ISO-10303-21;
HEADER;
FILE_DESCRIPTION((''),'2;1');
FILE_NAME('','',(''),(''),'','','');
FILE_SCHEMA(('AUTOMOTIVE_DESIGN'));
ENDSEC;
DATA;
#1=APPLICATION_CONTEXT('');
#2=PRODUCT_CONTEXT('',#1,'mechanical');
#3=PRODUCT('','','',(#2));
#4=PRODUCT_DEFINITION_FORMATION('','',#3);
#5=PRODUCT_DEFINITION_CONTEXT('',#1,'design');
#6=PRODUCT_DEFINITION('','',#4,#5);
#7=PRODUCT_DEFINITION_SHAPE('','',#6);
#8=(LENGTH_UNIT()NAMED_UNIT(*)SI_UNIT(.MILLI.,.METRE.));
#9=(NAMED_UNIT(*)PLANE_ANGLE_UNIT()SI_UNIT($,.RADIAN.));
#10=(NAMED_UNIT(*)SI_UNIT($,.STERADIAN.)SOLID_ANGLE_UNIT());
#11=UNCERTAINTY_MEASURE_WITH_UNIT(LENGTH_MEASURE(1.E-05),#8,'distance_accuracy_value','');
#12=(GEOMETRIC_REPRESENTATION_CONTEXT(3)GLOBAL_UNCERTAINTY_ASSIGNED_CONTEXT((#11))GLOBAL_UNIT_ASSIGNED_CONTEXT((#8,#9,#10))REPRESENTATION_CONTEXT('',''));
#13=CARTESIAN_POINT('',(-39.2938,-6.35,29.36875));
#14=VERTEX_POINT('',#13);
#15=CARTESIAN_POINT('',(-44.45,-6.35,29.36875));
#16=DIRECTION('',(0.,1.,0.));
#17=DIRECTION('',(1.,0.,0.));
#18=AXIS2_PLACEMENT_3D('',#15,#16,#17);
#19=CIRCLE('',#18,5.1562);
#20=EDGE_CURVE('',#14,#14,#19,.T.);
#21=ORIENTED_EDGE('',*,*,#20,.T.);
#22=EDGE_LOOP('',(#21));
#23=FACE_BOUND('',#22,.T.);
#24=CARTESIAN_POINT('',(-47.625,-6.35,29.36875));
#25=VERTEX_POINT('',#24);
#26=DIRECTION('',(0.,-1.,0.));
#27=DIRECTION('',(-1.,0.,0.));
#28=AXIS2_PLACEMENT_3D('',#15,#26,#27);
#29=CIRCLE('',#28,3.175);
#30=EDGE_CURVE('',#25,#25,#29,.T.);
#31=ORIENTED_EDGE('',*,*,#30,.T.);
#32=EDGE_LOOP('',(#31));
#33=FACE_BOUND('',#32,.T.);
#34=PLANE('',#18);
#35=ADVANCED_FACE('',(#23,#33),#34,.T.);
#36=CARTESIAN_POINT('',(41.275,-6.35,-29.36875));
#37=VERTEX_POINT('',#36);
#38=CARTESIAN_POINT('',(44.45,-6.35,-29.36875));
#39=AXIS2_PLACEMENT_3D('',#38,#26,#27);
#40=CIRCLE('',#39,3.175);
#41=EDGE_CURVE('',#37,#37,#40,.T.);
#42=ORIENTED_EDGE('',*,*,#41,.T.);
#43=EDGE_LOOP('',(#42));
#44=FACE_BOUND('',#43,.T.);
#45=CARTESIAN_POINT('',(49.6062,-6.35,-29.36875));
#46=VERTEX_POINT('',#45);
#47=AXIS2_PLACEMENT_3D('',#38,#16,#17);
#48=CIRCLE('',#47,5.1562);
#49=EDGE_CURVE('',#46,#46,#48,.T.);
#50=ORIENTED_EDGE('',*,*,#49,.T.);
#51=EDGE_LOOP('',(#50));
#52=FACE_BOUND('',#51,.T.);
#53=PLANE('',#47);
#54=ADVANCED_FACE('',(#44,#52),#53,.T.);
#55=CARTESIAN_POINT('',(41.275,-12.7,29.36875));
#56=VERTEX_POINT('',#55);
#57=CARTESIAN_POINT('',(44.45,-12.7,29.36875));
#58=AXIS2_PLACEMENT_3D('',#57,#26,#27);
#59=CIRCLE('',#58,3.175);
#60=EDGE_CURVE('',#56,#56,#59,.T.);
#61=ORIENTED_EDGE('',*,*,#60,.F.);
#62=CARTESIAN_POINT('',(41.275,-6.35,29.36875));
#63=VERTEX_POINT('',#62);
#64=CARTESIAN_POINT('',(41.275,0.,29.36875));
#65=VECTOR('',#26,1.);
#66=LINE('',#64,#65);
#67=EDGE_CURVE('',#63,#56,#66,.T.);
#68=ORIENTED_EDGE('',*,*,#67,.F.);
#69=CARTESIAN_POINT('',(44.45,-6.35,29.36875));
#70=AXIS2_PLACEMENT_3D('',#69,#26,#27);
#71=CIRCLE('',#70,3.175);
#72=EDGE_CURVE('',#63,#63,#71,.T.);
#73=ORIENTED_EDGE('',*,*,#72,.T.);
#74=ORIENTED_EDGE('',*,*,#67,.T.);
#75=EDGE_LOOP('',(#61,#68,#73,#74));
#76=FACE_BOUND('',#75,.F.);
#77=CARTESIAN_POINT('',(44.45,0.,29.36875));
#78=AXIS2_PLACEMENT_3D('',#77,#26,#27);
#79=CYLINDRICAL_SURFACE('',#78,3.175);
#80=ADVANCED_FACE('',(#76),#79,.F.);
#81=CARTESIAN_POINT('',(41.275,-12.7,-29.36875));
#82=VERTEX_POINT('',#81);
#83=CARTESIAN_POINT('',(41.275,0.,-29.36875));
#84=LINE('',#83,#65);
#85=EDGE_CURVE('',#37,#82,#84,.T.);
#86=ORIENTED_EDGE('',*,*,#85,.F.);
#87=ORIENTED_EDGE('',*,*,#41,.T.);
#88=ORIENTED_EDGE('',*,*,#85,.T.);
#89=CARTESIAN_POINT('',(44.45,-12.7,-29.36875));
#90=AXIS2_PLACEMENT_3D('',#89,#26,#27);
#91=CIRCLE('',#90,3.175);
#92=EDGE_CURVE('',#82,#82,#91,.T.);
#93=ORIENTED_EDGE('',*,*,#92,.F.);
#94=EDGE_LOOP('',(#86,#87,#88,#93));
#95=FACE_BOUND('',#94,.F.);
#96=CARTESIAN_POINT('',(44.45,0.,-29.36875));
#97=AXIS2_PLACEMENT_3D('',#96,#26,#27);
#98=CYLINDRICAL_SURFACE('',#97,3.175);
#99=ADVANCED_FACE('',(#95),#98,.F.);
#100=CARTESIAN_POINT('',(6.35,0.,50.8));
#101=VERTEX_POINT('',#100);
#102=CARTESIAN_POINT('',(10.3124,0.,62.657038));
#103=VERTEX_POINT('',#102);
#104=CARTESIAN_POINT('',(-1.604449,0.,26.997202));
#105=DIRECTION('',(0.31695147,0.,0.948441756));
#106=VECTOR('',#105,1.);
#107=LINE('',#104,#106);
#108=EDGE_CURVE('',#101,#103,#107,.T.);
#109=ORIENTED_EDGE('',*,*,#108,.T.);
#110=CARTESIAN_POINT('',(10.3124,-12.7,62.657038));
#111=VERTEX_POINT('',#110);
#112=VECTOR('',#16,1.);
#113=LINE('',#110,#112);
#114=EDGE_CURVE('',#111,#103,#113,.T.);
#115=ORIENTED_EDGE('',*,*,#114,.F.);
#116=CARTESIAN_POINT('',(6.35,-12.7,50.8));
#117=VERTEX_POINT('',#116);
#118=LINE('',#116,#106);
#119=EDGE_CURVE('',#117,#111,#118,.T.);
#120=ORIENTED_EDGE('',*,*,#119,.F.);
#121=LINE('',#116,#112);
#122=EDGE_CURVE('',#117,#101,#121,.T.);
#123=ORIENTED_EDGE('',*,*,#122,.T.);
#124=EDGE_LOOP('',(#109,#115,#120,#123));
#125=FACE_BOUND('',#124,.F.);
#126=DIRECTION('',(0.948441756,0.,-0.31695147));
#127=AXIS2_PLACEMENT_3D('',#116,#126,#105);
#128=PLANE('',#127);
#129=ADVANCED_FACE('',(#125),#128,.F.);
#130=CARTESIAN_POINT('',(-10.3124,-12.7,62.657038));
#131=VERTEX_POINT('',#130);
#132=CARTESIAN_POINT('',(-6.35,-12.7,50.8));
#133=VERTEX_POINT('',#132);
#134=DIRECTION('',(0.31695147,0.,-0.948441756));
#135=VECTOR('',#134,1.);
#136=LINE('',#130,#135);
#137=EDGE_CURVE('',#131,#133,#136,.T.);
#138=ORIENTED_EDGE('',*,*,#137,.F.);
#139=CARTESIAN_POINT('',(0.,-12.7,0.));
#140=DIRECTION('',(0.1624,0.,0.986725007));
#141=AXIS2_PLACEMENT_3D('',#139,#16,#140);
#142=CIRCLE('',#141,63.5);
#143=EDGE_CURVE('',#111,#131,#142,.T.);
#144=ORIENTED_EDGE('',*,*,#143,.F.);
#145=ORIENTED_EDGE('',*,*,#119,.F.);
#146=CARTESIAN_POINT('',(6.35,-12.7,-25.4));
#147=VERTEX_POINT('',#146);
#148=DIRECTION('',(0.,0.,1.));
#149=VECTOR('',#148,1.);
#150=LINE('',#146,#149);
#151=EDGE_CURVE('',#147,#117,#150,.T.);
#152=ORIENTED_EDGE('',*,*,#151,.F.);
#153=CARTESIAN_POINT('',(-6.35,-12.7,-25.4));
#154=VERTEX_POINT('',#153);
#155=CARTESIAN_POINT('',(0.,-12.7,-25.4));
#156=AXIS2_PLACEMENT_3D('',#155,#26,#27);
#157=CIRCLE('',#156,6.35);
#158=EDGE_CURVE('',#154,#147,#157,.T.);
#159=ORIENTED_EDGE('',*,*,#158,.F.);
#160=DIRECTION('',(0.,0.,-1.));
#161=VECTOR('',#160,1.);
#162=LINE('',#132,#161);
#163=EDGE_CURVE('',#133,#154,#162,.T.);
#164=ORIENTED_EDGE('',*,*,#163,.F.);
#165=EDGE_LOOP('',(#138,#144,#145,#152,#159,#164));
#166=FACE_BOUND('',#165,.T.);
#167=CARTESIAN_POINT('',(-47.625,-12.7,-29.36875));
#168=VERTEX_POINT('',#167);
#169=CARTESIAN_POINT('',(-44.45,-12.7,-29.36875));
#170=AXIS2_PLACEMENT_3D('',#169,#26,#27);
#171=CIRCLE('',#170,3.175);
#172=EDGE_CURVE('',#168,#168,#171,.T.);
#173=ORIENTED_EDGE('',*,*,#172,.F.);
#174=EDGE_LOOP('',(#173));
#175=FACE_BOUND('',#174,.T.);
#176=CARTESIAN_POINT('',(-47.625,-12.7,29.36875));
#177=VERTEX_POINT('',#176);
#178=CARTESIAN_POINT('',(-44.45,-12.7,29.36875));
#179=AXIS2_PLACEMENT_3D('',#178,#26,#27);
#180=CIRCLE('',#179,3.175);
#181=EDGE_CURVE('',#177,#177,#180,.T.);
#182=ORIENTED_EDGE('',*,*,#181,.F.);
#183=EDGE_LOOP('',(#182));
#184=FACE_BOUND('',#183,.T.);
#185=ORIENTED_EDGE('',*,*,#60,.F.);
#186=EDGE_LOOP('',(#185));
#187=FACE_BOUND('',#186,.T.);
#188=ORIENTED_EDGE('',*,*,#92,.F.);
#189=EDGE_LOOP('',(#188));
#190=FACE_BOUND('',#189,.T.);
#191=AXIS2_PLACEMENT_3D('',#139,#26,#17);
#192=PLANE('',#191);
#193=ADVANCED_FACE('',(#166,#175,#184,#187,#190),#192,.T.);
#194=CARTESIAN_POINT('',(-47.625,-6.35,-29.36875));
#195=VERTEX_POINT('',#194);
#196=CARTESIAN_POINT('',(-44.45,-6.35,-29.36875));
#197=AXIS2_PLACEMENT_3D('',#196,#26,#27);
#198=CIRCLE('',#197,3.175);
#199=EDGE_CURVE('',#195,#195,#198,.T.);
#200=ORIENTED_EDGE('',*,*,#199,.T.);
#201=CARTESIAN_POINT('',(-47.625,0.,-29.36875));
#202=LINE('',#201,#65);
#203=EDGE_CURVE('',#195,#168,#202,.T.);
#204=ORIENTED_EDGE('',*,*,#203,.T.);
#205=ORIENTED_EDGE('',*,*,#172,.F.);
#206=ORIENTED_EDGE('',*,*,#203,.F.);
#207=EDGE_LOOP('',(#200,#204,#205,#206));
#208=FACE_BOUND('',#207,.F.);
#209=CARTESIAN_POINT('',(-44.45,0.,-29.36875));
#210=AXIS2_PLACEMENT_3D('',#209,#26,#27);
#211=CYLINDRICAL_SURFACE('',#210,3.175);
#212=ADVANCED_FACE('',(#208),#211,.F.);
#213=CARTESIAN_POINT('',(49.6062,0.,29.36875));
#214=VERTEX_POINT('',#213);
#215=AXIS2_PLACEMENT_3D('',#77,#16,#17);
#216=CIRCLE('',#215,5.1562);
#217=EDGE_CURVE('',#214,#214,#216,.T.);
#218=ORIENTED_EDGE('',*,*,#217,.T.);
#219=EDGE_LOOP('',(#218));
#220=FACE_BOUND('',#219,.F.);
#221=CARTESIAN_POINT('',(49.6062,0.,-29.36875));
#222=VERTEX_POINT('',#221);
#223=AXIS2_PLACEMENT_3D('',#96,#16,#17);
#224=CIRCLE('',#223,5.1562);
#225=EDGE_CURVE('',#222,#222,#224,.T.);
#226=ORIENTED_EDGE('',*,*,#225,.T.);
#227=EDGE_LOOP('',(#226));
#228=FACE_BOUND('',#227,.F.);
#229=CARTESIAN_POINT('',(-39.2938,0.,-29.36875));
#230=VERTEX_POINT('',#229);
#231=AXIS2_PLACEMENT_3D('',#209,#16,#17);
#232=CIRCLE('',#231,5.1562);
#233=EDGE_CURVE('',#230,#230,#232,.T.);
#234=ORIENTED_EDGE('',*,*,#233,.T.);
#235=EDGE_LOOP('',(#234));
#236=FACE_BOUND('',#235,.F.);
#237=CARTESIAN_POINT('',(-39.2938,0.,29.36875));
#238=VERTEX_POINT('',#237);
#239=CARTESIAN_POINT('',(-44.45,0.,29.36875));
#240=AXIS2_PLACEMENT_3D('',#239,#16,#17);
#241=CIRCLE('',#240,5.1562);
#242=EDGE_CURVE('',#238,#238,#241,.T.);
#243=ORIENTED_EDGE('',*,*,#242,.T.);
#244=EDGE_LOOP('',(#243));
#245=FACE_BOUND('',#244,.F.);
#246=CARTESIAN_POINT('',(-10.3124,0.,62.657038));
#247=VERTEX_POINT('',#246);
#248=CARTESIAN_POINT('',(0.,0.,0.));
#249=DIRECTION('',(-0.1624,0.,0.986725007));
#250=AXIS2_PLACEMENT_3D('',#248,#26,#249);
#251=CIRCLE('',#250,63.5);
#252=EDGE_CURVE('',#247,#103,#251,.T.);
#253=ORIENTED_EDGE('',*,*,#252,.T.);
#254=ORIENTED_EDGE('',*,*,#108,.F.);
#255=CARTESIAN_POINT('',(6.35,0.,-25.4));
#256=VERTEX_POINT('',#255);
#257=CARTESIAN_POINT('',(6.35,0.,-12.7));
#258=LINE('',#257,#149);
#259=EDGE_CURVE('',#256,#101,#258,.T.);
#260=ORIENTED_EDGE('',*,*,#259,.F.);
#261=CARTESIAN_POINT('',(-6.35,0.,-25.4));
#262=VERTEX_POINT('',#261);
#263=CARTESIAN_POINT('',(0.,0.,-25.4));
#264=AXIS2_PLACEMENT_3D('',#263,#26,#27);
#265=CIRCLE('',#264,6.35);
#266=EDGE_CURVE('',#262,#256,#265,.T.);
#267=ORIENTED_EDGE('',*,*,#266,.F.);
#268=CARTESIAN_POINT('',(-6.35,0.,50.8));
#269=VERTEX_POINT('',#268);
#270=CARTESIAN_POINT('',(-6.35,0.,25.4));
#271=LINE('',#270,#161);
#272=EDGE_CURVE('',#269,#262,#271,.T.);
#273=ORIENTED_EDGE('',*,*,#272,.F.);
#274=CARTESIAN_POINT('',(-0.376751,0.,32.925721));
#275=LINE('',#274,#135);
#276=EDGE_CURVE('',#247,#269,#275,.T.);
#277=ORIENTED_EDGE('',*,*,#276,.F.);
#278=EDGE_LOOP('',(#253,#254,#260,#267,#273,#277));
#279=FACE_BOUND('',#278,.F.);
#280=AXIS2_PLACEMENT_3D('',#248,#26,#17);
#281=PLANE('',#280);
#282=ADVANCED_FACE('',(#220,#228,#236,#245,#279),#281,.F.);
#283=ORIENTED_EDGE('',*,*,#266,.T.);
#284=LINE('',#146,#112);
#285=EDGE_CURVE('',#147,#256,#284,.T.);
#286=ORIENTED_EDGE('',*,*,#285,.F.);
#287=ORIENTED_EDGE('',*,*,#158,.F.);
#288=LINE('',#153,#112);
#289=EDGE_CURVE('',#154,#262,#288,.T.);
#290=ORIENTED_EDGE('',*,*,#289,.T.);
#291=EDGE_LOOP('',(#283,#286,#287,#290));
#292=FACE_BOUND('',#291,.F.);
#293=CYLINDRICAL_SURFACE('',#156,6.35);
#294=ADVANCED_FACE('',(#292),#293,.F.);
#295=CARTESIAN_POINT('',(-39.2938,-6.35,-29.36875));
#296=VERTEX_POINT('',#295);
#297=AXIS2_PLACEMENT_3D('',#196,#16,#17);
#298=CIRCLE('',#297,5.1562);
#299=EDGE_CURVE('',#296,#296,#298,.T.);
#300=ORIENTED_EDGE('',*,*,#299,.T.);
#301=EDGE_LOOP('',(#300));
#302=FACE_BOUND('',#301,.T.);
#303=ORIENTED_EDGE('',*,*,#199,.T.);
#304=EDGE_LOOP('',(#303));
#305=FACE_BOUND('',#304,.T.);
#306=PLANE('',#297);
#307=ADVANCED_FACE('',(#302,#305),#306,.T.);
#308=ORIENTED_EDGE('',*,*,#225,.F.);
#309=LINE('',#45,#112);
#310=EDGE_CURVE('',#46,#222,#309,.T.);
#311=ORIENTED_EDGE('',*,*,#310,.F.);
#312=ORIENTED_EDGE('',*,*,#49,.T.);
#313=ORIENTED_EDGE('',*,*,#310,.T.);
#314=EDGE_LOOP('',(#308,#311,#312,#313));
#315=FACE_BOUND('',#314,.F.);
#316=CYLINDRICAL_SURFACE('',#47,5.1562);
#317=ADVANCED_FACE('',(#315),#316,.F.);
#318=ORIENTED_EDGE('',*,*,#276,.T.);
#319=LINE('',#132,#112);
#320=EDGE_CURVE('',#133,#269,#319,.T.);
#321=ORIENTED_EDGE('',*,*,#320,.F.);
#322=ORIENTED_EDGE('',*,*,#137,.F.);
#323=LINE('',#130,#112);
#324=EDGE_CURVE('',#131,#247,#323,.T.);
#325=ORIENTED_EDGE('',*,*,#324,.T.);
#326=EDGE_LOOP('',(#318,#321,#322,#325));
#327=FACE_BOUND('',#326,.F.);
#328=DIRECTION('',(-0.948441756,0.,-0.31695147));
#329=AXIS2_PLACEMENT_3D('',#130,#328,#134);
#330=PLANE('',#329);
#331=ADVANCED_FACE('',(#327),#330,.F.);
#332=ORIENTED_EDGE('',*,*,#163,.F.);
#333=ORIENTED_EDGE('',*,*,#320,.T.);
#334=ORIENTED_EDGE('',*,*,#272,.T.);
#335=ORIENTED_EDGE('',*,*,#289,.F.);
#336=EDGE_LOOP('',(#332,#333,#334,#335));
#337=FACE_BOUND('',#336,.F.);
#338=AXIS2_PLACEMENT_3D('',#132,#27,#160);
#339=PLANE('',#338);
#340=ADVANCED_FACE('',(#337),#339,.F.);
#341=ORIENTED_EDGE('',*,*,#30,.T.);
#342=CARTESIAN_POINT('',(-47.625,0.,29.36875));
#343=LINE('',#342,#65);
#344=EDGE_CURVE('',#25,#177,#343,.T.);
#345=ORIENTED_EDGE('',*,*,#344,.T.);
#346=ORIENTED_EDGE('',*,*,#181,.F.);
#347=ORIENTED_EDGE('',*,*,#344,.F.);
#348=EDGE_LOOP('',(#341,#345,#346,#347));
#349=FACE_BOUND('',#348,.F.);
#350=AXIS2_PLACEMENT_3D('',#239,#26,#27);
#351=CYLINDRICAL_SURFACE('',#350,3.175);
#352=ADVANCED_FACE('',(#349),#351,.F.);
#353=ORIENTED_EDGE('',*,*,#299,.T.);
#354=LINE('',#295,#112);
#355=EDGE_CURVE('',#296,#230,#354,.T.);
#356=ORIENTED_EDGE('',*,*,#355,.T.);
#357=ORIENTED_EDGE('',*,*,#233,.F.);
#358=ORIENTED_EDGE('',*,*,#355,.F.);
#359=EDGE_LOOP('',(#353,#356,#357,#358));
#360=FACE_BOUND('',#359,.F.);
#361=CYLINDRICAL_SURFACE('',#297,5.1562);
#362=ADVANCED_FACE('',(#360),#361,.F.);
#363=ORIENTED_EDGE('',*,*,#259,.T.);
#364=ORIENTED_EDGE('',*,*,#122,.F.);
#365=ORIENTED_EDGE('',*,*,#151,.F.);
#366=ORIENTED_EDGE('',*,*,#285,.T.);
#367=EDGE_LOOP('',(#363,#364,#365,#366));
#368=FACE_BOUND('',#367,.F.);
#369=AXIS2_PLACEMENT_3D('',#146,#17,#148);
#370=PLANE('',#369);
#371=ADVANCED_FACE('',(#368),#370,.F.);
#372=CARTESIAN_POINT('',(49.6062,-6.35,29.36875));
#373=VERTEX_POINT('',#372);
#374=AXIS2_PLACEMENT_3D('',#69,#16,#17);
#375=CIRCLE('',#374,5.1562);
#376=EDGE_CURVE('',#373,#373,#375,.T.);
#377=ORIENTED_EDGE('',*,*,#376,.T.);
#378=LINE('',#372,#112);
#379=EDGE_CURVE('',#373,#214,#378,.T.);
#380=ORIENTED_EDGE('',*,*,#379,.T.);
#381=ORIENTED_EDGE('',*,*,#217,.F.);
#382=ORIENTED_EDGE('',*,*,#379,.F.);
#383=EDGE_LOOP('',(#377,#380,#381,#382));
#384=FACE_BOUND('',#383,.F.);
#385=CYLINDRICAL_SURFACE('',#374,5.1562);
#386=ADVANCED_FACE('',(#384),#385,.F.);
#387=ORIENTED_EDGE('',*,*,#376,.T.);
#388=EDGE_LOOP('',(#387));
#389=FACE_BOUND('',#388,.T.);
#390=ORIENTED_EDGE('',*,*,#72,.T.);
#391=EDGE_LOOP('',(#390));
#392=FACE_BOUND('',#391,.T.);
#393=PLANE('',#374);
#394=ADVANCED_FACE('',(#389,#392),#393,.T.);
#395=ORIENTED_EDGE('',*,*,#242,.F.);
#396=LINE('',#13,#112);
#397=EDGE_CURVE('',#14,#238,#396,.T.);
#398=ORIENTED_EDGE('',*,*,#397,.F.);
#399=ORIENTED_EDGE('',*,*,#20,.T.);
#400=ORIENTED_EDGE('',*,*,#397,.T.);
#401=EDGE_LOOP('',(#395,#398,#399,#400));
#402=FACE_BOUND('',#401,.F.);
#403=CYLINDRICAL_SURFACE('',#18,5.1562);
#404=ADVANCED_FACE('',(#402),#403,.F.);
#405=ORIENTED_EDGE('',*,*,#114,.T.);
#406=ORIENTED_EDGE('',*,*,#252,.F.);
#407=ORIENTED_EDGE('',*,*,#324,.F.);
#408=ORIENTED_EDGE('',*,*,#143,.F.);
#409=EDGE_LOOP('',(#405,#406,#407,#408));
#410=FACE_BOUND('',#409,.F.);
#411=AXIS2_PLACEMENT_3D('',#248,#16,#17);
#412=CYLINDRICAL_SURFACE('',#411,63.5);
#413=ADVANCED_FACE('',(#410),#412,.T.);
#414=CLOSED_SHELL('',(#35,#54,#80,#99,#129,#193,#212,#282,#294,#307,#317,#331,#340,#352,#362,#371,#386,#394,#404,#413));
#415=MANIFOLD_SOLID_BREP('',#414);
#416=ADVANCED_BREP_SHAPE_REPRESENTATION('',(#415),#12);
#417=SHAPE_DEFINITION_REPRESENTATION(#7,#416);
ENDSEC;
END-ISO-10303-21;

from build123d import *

# Parameters (mm, degrees)
F0_R           = 63.5
F1_DEPTH       = 12.7
F3_DEPTH       = 25.4
F4_D           = 6.35
F4_CBORE_D     = 10.3124
F4_CBORE_DEPTH = 6.35


# Not quite as in the source:
# - a feature names something its author has since deleted; it is built from what else it names


with BuildPart() as f1:
    # F0 (on Front) → F1 (new body)
    with BuildSketch(Plane.XZ):
        Circle(F0_R)
    extrude(amount=F1_DEPTH)

    # F2 (on face) → F3 (cut)
    with BuildSketch(Plane.XZ.offset(12.7)):
        with BuildLine():
            Line((-10.3124, 62.6570379625), (-6.35, 50.8))
            Line((-6.35, 50.8), (-6.35, -25.4))
            ThreePointArc((-6.35, -25.4), (0, -31.75), (6.35, -25.4))
            Line((6.35, -25.4), (6.35, 50.8))
            Line((6.35, 50.8), (10.3124, 62.6570379625))
            ThreePointArc((10.3124, 62.6570379625), (0, 63.5), (-10.3124, 62.6570379625))
        make_face()
    extrude(amount=-F3_DEPTH, mode=Mode.SUBTRACT)

    # F4 (through all)
    with Locations(Plane(origin=(0, 0, 0), x_dir=(1, 0, 0), z_dir=(0, 1, 0))):
        with Locations((44.45, -29.36875), (-44.45, -29.36875), (44.45, 29.36875), (-44.45, 29.36875)):
            CounterBoreHole(F4_D / 2, F4_CBORE_D / 2, F4_CBORE_DEPTH)


solid = f1.part
